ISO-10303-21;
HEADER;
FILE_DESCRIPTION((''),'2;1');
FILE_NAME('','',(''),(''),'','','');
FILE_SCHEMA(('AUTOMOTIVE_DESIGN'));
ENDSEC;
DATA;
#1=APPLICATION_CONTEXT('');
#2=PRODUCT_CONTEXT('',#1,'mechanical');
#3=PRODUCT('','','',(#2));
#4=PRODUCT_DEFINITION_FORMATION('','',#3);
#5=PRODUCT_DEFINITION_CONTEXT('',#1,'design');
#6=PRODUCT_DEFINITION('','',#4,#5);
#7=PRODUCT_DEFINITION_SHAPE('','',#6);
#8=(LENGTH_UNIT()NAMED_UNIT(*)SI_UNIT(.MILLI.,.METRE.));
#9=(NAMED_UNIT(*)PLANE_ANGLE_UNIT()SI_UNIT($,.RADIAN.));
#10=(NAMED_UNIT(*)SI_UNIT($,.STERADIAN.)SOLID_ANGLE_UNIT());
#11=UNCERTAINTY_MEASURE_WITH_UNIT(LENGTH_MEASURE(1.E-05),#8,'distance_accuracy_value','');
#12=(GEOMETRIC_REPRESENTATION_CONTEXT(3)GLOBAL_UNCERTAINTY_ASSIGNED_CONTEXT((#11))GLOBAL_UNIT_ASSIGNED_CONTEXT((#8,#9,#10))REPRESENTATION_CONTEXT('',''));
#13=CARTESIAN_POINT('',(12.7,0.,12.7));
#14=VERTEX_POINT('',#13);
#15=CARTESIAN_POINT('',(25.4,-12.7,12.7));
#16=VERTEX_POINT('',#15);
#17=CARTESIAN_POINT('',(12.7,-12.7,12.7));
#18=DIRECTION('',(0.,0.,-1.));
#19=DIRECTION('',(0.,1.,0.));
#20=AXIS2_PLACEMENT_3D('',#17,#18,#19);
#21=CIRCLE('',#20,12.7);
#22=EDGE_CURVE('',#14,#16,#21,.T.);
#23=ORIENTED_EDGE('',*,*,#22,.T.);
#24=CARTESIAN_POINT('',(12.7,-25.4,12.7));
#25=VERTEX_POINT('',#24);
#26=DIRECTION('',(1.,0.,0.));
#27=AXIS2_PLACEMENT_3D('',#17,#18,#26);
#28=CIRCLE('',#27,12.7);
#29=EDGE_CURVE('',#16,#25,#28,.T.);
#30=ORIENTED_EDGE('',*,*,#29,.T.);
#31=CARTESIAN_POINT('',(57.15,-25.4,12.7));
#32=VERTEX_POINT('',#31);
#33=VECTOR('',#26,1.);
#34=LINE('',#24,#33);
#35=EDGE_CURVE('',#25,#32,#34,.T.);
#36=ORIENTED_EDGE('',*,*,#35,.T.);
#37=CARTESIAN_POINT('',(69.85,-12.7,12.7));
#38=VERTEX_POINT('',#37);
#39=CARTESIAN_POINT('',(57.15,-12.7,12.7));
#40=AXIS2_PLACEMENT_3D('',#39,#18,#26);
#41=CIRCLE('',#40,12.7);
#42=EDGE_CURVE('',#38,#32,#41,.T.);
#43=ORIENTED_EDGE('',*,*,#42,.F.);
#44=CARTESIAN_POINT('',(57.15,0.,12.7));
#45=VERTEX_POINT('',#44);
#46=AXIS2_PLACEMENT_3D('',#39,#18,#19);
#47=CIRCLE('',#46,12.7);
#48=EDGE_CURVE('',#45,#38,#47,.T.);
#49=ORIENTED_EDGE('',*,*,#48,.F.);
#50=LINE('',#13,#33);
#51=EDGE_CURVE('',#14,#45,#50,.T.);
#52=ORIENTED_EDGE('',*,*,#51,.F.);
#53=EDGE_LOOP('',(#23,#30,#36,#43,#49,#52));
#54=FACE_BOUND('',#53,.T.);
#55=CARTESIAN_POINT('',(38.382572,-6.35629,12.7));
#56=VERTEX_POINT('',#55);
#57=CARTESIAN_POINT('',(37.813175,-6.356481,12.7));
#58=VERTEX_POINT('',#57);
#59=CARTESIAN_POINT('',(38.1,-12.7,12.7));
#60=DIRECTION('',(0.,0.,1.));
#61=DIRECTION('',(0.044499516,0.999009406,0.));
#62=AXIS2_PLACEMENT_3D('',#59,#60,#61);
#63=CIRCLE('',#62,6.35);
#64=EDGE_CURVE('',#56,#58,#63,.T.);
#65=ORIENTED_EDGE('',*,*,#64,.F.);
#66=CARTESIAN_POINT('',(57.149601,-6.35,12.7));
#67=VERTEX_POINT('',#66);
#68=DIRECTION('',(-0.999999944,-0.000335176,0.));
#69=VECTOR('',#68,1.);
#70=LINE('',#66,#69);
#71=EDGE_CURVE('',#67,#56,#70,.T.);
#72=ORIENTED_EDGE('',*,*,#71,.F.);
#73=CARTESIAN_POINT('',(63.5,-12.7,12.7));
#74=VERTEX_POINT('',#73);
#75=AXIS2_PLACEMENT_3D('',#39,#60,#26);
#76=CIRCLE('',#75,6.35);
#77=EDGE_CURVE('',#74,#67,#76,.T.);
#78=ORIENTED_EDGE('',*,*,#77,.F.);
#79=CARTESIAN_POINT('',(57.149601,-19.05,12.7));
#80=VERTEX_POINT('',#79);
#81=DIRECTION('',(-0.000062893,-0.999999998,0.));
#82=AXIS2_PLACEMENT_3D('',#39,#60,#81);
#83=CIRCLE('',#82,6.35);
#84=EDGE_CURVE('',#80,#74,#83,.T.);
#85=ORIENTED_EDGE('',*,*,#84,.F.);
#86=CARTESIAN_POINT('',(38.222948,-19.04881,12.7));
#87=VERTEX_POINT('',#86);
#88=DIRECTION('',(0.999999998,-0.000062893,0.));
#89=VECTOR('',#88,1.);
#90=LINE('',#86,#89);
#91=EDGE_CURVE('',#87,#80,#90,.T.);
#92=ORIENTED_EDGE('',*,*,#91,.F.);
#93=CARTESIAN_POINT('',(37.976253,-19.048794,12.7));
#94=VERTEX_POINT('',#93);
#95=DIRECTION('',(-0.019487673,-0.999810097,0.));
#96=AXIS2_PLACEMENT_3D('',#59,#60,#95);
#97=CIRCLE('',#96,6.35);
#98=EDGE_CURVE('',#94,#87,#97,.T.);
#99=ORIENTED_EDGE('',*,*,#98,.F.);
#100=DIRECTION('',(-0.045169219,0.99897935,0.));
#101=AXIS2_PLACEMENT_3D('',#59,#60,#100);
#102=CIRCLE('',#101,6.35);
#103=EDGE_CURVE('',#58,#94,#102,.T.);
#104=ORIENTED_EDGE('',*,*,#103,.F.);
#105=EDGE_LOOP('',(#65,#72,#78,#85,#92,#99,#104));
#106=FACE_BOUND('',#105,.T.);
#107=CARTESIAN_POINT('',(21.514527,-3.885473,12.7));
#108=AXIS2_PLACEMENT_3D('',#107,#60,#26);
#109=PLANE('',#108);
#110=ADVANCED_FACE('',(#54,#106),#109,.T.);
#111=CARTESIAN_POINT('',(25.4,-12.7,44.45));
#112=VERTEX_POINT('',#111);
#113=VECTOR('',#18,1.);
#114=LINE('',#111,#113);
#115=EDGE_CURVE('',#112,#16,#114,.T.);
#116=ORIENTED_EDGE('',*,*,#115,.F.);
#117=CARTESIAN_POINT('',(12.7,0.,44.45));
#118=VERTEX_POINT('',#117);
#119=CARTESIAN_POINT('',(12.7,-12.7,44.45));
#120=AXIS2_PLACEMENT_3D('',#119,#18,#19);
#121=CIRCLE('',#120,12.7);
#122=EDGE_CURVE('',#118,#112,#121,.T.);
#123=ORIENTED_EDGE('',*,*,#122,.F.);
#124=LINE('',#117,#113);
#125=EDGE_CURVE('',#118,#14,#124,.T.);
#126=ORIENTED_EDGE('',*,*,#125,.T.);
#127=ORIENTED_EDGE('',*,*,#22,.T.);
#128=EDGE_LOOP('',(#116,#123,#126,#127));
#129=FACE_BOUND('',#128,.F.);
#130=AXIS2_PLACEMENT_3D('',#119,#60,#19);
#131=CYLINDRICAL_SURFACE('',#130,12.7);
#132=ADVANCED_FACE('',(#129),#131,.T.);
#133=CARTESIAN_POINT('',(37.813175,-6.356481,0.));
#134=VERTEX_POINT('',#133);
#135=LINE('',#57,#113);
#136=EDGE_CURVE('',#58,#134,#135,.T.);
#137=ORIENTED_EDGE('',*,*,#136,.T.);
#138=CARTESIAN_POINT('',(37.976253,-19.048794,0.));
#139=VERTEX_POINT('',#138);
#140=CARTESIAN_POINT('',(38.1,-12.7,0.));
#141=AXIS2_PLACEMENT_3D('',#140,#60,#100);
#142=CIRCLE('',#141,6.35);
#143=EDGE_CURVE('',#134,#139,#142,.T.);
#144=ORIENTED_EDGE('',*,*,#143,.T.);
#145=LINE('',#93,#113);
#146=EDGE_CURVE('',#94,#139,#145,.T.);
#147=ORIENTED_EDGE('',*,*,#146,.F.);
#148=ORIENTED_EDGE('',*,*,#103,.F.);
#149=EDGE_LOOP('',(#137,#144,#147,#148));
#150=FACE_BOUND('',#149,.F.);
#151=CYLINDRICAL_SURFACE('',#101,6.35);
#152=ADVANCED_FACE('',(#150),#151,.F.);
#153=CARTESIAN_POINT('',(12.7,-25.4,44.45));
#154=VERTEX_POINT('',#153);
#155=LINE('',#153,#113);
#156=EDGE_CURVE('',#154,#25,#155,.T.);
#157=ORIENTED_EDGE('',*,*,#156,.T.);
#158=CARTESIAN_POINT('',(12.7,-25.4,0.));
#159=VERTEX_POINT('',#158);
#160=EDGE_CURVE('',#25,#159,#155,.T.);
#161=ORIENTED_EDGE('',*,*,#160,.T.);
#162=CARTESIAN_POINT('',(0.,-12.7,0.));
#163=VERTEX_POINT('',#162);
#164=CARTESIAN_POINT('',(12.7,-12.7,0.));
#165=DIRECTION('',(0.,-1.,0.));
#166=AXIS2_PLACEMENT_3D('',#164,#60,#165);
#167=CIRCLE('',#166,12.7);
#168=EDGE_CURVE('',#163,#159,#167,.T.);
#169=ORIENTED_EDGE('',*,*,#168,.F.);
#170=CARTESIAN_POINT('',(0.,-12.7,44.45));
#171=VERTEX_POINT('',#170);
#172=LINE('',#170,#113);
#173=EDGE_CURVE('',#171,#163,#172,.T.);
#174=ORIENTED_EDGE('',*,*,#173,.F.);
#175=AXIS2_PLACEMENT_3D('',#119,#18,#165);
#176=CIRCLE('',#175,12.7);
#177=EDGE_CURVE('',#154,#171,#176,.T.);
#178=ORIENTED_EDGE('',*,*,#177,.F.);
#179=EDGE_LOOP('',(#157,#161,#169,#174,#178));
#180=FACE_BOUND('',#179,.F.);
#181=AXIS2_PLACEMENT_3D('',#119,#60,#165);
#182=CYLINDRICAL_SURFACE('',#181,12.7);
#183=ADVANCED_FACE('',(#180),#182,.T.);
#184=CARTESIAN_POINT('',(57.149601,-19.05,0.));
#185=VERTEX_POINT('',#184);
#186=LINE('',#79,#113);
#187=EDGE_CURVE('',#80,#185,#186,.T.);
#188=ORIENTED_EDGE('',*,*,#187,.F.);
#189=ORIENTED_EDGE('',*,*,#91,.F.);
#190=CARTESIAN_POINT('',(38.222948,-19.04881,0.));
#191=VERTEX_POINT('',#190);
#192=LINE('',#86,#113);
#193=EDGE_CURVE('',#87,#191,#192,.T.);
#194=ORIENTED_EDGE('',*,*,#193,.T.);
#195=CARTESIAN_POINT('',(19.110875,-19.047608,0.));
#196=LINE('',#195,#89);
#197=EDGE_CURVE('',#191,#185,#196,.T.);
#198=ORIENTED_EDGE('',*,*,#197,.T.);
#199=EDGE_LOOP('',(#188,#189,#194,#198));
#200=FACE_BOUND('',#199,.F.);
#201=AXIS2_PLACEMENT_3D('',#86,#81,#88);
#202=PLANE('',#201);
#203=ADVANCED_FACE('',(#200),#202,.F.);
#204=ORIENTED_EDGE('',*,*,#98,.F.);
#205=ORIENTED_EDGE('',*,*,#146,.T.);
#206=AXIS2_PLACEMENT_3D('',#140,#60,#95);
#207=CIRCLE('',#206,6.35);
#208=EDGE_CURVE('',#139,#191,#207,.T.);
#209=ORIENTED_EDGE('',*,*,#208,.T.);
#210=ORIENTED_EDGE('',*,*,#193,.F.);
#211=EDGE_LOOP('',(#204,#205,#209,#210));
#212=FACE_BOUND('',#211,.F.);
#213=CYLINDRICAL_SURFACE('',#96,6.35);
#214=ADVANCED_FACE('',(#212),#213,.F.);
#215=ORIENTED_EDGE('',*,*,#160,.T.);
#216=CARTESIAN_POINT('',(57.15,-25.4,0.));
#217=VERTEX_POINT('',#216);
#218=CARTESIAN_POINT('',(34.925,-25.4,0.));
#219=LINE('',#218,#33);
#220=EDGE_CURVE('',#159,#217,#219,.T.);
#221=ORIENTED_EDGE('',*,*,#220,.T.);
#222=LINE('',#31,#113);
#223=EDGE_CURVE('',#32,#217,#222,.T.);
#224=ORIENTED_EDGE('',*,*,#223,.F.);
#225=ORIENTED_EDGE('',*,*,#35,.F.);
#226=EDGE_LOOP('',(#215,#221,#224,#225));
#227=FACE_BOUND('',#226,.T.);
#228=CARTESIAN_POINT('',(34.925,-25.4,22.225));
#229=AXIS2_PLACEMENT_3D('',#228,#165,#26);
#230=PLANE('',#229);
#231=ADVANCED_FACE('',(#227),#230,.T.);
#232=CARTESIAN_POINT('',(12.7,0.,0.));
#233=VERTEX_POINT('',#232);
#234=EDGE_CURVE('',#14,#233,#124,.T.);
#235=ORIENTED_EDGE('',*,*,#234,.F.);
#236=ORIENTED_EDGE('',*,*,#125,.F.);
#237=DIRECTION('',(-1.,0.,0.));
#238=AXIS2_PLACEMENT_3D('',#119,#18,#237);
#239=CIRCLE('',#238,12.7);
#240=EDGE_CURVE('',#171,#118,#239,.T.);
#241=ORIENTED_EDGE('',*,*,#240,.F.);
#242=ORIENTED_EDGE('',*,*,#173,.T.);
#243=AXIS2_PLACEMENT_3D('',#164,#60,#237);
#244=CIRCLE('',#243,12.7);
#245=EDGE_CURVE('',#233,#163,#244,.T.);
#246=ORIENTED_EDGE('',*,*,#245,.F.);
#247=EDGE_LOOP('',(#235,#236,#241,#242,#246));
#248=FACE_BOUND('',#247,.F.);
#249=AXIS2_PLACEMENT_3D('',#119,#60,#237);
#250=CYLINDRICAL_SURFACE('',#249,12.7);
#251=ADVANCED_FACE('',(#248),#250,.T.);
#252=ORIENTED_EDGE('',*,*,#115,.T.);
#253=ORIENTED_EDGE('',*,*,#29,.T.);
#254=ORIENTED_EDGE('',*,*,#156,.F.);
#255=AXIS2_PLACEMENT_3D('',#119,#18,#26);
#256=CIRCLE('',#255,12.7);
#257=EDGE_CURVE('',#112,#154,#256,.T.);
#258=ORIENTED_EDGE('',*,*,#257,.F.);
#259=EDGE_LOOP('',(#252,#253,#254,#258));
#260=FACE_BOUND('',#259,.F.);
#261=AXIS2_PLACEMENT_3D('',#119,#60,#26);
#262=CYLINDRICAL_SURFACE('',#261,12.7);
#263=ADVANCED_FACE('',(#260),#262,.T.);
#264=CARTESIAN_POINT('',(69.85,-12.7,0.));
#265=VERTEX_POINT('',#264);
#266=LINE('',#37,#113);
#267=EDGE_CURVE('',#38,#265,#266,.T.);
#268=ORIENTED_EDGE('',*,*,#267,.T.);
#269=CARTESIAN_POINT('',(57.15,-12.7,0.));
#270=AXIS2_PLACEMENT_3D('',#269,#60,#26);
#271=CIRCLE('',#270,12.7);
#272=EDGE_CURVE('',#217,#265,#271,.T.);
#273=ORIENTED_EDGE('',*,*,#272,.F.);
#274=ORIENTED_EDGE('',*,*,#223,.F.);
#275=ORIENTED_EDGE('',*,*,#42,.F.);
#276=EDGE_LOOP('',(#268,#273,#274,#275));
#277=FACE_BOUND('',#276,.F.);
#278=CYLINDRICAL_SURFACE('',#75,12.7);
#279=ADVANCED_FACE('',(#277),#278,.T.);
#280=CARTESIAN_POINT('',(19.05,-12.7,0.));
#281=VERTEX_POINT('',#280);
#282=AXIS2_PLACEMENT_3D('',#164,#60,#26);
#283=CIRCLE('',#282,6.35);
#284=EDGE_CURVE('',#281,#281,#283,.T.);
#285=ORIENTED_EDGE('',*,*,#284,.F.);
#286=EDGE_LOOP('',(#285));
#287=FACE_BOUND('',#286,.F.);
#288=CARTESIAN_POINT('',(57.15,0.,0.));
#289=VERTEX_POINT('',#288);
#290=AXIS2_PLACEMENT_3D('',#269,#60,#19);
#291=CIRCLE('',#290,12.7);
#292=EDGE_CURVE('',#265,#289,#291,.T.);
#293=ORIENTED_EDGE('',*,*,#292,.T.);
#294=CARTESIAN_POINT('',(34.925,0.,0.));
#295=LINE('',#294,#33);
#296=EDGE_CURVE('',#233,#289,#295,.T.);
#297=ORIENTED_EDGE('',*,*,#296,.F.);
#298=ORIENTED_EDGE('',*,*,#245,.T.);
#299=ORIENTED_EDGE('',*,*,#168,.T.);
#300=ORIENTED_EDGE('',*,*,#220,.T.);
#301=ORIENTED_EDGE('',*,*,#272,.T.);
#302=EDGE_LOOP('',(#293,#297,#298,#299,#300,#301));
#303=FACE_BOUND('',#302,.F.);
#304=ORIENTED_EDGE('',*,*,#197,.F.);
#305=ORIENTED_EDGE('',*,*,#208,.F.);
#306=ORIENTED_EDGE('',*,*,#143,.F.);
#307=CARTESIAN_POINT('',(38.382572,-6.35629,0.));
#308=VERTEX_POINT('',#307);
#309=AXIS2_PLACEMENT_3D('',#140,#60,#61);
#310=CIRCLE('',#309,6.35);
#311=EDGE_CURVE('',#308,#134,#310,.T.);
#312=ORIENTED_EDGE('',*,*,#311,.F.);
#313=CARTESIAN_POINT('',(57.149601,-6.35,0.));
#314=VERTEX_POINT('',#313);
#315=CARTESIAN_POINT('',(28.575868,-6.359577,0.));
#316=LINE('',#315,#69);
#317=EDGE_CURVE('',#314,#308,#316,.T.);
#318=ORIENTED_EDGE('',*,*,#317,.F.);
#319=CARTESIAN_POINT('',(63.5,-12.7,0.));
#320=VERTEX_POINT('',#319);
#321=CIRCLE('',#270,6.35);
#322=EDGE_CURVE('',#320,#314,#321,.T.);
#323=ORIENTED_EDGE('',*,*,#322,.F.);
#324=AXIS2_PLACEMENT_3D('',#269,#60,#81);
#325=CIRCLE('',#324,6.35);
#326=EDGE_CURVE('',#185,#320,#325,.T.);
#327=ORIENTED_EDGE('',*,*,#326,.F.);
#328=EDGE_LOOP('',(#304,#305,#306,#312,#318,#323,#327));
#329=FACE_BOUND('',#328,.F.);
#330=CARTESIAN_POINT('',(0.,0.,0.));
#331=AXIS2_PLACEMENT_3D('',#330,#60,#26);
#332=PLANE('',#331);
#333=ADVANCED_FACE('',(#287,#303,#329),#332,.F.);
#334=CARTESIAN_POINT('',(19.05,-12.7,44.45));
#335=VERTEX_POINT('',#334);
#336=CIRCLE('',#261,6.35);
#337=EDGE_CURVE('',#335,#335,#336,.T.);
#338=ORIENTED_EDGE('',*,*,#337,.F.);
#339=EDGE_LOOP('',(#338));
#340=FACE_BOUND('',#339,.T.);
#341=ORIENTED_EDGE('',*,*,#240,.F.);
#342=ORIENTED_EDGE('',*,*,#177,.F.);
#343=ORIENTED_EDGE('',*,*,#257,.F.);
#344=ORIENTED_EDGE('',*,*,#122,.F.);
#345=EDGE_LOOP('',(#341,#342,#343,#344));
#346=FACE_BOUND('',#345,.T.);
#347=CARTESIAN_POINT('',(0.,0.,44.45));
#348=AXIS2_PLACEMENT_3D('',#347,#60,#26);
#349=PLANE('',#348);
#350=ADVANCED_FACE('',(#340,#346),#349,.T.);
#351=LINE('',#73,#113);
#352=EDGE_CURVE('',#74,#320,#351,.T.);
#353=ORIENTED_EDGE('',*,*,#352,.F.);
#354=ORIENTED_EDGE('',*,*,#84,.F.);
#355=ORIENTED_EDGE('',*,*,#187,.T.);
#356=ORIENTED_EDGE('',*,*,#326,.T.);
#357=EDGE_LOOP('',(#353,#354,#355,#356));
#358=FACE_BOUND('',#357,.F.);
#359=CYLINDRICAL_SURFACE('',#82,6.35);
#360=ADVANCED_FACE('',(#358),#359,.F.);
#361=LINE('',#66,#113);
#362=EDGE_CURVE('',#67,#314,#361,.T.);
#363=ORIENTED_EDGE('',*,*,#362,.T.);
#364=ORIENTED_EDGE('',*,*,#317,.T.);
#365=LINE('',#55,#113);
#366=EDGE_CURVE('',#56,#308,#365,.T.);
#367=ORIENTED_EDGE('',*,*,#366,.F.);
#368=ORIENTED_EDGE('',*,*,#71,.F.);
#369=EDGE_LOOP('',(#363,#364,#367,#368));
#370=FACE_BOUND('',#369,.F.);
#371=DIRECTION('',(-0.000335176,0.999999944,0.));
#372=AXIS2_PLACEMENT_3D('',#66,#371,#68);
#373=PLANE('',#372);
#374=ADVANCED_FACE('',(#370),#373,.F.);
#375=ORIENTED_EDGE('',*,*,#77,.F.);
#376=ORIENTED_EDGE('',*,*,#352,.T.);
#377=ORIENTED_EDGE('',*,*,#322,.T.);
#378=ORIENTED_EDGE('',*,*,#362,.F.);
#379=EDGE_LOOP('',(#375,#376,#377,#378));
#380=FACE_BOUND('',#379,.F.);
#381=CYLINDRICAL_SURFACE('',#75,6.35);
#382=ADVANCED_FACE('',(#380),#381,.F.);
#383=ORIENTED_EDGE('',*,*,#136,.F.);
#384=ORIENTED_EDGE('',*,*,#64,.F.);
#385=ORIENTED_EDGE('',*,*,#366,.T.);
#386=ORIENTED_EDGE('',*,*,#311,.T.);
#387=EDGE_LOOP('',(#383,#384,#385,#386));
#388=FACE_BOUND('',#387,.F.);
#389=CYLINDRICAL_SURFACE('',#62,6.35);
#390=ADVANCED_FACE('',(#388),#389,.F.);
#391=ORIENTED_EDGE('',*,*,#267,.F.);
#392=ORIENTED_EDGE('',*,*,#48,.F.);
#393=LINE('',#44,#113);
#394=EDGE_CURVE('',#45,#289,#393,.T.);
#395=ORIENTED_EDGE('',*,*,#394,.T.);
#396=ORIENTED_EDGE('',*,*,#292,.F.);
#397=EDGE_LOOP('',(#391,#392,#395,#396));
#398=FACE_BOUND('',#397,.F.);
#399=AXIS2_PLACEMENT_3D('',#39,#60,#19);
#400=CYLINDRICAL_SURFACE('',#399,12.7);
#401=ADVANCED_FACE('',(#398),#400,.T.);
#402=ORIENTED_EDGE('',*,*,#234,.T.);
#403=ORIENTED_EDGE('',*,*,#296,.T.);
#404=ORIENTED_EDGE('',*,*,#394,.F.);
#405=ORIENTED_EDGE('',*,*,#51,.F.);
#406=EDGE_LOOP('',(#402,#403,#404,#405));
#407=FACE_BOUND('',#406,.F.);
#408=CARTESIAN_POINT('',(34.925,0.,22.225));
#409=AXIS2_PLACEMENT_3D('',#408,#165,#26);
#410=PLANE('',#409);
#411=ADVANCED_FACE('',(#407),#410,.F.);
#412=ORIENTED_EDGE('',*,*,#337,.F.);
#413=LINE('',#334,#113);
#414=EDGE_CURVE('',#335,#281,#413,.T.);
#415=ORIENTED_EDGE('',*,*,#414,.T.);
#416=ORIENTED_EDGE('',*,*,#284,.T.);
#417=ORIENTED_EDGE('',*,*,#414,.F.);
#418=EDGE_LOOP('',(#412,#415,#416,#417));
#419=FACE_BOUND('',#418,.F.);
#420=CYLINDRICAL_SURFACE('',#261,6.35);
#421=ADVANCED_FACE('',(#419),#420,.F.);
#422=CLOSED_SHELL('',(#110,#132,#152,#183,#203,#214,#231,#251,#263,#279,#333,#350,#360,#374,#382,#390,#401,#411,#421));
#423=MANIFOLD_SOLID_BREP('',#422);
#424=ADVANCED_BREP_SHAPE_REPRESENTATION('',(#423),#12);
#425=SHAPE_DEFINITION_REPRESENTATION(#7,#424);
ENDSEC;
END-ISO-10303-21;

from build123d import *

# Parameters (mm, degrees)
F0_W      = 69.85
F0_H      = 44.45
F1_DEPTH  = 25.4
F2_W      = 44.45
F2_H      = 31.75
F3_DEPTH  = 25.4
F5_DEPTH  = 50.8
F7_DEPTH  = 50.8
F9_DEPTH  = 31.75
F11_DEPTH = 31.75
F13_DEPTH = 25.4
F14_R     = 6.35
F15_DEPTH = 50.8
F17_DEPTH = 25.4


# Not quite as in the source:
# - ends of sketch curves that miss each other by under 0.0002 mm in the source are joined


with BuildPart() as f1:
    # F0 (on Front) → F1 (new body)
    with BuildSketch(Plane.XZ):
        with Locations((34.925, 22.225)):
            Rectangle(F0_W, F0_H)
    extrude(amount=F1_DEPTH)

    # F2 (on face) → F3 (cut)
    with BuildSketch(Plane.XZ.offset(25.4)):
        with Locations((47.625, 28.575)):
            Rectangle(F2_W, F2_H)
    extrude(amount=-F3_DEPTH, mode=Mode.SUBTRACT)

    # F4 (on face) → F5 (cut)
    with BuildSketch(Plane.XY.offset(44.45)):
        with BuildLine():
            ThreePointArc((0, -12.7), (3.7197438789, -3.7197438789), (12.7, 0))
            Line((12.7, 0), (0, 0))
            Line((0, 0), (0, -12.7))
        make_face()
    extrude(amount=-F5_DEPTH, mode=Mode.SUBTRACT)

    # F6 (on face) → F7 (cut)
    with BuildSketch(Plane.XY.offset(44.45)):
        with BuildLine():
            ThreePointArc((12.7, -25.4), (3.7197438789, -21.6802561211), (0, -12.7))
            Line((0, -12.7), (0, -25.4))
            Line((0, -25.4), (12.7, -25.4))
        make_face()
    extrude(amount=-F7_DEPTH, mode=Mode.SUBTRACT)

    # F8 (on face) → F9 (cut)
    with BuildSketch(Plane.XY.offset(44.45)):
        with BuildLine():
            ThreePointArc((25.4, -12.7), (21.6802561211, -21.6802561211), (12.7, -25.4))
            Line((12.7, -25.4), (25.4, -25.4))
            Line((25.4, -25.4), (25.4, -12.7))
        make_face()
    extrude(amount=-F9_DEPTH, mode=Mode.SUBTRACT)

    # F10 (on face) → F11 (cut)
    with BuildSketch(Plane.XY.offset(44.45)):
        with BuildLine():
            ThreePointArc((12.7, 0), (21.6802561211, -3.7197438789), (25.4, -12.7))
            Line((25.4, -12.7), (25.4, 0))
            Line((25.4, 0), (12.7, 0))
        make_face()
    extrude(amount=-F11_DEPTH, mode=Mode.SUBTRACT)

    # F12 (on face) → F13 (cut)
    with BuildSketch(Plane.XY.offset(12.7)):
        with BuildLine():
            ThreePointArc((57.1496006293, -19.0499999874), (50.8, -12.7), (57.1496006293, -6.3500000126))
            Line((57.1496006293, -6.3500000126), (38.3825719247, -6.3562902725))
            ThreePointArc((38.3825719247, -6.3562902725), (42.6889449616, -8.3109130632), (44.45, -12.7))
            ThreePointArc((44.45, -12.7), (42.6333883945, -17.1464468584), (38.2229481372, -19.048809633))
            Line((38.2229481372, -19.048809633), (57.1496006293, -19.0499999874))
        make_face()
        with BuildLine():
            ThreePointArc((57.1496006293, -19.0499999874), (61.6399868594, -17.1902692572), (63.5, -12.7))
            ThreePointArc((63.5, -12.7), (61.6399868594, -8.2097307428), (57.1496006293, -6.3500000126))
            ThreePointArc((57.1496006293, -6.3500000126), (50.8, -12.7), (57.1496006293, -19.0499999874))
        make_face()
        with BuildLine():
            Line((37.81317546, -6.3564811277), (38.3825719247, -6.3562902725))
            ThreePointArc((38.3825719247, -6.3562902725), (38.0978715521, -6.3500003567), (37.81317546, -6.3564811277))
        make_face()
        with BuildLine():
            ThreePointArc((44.45, -12.7), (42.6889449616, -8.3109130632), (38.3825719247, -6.3562902725))
            Line((38.3825719247, -6.3562902725), (37.81317546, -6.3564811277))
            ThreePointArc((37.81317546, -6.3564811277), (31.7505240807, -12.7815815558), (37.9762532721, -19.0487941176))
            Line((37.9762532721, -19.0487941176), (38.2229481372, -19.048809633))
            ThreePointArc((38.2229481372, -19.048809633), (42.6333883945, -17.1464468584), (44.45, -12.7))
        make_face()
        with BuildLine():
            ThreePointArc((37.9762532721, -19.0487941176), (38.0996006293, -19.0499999874), (38.2229481372, -19.048809633))
            Line((38.2229481372, -19.048809633), (37.9762532721, -19.0487941176))
        make_face()
    extrude(amount=-F13_DEPTH, mode=Mode.SUBTRACT)

    # F14 (on face) → F15 (cut)
    with BuildSketch(Plane.XY.offset(44.45)):
        with Locations((12.7, -12.7)):
            Circle(F14_R)
    extrude(amount=-F15_DEPTH, mode=Mode.SUBTRACT)

    # F16 (on face) → F17 (cut)
    with BuildSketch(Plane.XY.offset(12.7)):
        with BuildLine():
            Line((69.85, -25.4), (69.85, -12.7))
            ThreePointArc((69.85, -12.7), (66.1302561211, -21.6802561211), (57.15, -25.4))
            Line((57.15, -25.4), (69.85, -25.4))
        make_face()
        with BuildLine():
            ThreePointArc((57.15, 0), (66.1302561211, -3.7197438789), (69.85, -12.7))
            Line((69.85, -12.7), (69.85, 0))
            Line((69.85, 0), (57.15, 0))
        make_face()
    extrude(amount=-F17_DEPTH, mode=Mode.SUBTRACT)


solid = f1.part
